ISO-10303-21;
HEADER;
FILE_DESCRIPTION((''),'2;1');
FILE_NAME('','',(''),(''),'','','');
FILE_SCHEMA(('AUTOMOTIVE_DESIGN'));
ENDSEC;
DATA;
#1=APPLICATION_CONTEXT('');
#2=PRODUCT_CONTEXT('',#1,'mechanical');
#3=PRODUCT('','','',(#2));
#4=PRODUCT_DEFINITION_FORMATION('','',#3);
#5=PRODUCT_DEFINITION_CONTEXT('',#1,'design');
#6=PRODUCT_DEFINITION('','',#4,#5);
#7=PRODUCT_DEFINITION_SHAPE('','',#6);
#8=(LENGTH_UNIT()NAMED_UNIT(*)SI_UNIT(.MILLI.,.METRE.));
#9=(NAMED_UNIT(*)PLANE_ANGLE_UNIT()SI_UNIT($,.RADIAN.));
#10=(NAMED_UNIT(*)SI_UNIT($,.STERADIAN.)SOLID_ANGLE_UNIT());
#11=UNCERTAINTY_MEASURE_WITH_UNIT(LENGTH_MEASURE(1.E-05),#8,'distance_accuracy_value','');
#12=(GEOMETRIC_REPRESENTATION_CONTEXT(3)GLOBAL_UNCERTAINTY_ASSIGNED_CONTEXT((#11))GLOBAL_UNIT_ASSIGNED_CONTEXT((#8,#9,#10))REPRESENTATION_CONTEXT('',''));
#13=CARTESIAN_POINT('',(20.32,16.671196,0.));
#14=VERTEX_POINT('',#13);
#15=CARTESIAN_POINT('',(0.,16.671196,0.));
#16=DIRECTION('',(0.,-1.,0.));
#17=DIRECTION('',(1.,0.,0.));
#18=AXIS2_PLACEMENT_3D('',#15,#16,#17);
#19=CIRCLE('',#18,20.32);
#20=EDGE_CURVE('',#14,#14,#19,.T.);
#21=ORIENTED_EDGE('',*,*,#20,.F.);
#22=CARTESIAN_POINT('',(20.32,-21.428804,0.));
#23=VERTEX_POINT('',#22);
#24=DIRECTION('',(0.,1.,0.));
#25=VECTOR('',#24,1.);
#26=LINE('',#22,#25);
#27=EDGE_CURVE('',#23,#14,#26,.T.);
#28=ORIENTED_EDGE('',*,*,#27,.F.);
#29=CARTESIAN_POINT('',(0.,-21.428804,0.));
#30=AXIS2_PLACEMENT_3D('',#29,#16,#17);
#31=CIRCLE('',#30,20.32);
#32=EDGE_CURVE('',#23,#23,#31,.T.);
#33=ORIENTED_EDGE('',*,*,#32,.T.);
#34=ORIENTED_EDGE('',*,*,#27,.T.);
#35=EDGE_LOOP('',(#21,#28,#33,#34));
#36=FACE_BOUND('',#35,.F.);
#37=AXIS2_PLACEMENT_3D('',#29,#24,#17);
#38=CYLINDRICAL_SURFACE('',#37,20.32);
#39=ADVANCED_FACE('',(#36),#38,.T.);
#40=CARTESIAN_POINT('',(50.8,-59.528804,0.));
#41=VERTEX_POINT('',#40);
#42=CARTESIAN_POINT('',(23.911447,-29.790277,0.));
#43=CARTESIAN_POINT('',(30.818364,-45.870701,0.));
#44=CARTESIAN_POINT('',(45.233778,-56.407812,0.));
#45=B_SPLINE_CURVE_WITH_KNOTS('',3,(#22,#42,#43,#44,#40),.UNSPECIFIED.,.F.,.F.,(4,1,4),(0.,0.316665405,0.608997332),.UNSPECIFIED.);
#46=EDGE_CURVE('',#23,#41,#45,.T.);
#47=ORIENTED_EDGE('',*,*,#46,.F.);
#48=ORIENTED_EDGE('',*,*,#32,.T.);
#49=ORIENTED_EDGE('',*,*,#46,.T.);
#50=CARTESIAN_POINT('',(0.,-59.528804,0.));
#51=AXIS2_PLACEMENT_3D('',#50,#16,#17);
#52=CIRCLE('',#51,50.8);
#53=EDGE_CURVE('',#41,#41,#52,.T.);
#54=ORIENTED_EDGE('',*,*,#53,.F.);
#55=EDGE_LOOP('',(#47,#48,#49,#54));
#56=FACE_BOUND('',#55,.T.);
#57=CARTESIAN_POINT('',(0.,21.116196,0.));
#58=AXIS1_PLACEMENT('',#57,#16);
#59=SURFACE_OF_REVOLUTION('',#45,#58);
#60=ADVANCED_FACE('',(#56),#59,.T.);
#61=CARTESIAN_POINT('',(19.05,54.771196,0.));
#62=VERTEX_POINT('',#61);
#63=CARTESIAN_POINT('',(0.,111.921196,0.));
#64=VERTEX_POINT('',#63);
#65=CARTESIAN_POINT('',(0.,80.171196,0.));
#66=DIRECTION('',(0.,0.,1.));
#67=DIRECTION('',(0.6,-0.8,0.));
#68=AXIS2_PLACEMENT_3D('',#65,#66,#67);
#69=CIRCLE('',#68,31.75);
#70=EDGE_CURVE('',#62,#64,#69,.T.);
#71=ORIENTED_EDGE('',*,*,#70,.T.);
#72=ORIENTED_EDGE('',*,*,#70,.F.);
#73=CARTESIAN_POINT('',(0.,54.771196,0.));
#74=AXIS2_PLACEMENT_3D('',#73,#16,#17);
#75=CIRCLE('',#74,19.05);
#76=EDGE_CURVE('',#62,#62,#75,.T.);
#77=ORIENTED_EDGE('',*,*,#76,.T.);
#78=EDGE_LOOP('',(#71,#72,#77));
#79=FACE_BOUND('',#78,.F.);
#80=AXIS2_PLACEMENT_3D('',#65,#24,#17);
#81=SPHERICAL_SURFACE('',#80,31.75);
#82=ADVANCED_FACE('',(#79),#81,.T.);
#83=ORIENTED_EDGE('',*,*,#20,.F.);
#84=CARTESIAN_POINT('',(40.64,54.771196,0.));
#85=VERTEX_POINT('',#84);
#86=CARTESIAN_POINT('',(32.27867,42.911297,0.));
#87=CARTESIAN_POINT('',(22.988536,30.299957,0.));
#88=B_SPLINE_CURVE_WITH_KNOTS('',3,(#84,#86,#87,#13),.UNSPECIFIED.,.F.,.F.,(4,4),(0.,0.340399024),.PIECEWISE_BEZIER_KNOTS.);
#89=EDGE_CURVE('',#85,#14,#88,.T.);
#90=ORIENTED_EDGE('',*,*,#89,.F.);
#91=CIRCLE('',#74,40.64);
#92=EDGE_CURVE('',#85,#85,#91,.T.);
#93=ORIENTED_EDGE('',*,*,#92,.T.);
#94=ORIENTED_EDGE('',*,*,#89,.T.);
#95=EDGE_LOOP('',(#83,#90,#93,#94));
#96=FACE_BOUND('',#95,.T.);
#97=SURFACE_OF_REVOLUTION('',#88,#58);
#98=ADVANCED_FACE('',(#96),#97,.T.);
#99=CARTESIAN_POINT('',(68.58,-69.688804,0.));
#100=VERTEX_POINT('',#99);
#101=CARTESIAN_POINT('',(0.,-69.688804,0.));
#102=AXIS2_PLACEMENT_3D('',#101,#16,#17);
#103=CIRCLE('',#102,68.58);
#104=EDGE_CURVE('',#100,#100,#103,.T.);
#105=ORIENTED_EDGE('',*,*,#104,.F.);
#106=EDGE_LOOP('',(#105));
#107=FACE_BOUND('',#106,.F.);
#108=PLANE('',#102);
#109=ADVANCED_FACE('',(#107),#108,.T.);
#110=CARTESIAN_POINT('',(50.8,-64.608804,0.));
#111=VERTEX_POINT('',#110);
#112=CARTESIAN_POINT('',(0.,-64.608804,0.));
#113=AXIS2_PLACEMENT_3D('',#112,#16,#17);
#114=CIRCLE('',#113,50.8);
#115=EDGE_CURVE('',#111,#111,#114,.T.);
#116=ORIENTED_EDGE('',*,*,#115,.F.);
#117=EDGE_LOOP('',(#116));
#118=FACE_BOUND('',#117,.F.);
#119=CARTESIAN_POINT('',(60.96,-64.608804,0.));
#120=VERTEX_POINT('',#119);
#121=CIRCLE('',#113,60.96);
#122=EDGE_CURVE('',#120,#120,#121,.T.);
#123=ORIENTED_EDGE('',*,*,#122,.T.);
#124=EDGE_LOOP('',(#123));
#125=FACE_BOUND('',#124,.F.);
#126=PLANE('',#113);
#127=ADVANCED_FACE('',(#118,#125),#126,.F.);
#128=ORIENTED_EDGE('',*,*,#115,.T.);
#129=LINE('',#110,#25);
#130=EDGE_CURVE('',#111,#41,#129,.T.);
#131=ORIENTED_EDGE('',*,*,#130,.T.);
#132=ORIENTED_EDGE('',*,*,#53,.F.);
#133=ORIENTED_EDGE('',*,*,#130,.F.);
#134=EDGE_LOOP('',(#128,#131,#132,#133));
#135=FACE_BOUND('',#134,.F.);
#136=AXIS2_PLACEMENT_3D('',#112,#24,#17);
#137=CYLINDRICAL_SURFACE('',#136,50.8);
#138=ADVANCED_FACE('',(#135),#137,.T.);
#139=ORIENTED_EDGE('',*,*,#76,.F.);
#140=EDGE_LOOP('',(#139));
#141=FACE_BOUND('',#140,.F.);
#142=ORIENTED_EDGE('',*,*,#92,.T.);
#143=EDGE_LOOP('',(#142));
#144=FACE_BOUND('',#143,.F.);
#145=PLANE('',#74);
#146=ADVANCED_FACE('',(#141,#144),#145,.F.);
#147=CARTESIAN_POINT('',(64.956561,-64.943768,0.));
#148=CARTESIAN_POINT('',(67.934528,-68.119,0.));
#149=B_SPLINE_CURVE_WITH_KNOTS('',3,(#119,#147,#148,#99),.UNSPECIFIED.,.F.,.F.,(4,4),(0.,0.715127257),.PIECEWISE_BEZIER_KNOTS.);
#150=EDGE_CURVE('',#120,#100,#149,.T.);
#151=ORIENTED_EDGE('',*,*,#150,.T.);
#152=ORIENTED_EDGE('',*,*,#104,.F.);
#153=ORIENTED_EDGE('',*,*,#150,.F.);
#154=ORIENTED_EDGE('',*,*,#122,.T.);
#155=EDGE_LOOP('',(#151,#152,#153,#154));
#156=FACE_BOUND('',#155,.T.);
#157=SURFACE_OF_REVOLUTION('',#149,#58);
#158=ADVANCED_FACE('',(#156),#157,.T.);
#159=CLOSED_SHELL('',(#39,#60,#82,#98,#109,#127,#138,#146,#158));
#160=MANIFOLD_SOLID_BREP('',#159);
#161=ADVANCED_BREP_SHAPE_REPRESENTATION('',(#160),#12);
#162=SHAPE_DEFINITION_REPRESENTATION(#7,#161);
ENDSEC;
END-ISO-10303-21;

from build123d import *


with BuildPart() as f1:
    # F0 (on Top) → F1 (revolve)
    with BuildSketch(Plane.XY):
        with BuildLine():
            Line((40.64, 54.7711955523), (19.05, 54.7711955523))
            ThreePointArc((19.05, 54.7711955523), (30.1206947131, 90.2114271234), (0, 111.9211955523))
            Line((0, 111.9211955523), (0, -69.6888044477))
            Line((0, -69.6888044477), (68.58, -69.6888044477))
            add(Edge.make_bspline(
                [(60.96, -64.6088044477), (63.6417855309, -66.0841173211), (66.1108927654, -67.8864608844), (68.58, -69.6888044477)],
                knots=[0.8150158321, 0.8150158321, 0.8150158321, 0.8150158321, 1, 1, 1, 1], degree=3))
            Line((60.96, -64.6088044477), (50.8, -64.6088044477))
            Line((50.8, -64.6088044477), (50.8, -59.5288044477))
            add(Edge.make_bspline(
                [(20.32, -21.4288044477), (23.9114469199, -29.790276514), (30.8183636705, -45.8707011348), (45.2337782312, -56.4078117468), (50.8, -59.5288044477)],
                knots=[0, 0, 0, 0, 0.3166654052, 0.6089973318, 0.6089973318, 0.6089973318, 0.6089973318], degree=3))
            Line((20.32, -21.4288044477), (20.32, -10.7584101574))
            Line((20.32, -10.7584101574), (20.32, -10.1280333474))
            add(Edge.make_bspline(
                [(20.32, 16.6711955523), (18.2177086424, 5.9343622337), (20.2250450762, -5.4339231678), (20.32, -10.1280333474)],
                knots=[0.3403990237, 0.3403990237, 0.3403990237, 0.3403990237, 0.6085677542, 0.6085677542, 0.6085677542, 0.6085677542], degree=3))
            add(Edge.make_bspline(
                [(40.64, 54.7711955523), (32.2786703904, 42.9112967892), (22.9885360543, 30.2999567207), (20.32, 16.6711955523)],
                knots=[0, 0, 0, 0, 0.3403990237, 0.3403990237, 0.3403990237, 0.3403990237], degree=3))
        make_face()
        with BuildLine():
            Line((20.32, -10.1280333474), (20.32, 16.6711955523))
            add(Edge.make_bspline(
                [(20.32, 16.6711955523), (18.2177086424, 5.9343622337), (20.2250450762, -5.4339231678), (20.32, -10.1280333474)],
                knots=[0.3403990237, 0.3403990237, 0.3403990237, 0.3403990237, 0.6085677542, 0.6085677542, 0.6085677542, 0.6085677542], degree=3))
        make_face()
        with BuildLine():
            add(Edge.make_bspline(
                [(60.96, -64.6088044477), (63.6417855309, -66.0841173211), (66.1108927654, -67.8864608844), (68.58, -69.6888044477)],
                knots=[0.8150158321, 0.8150158321, 0.8150158321, 0.8150158321, 1, 1, 1, 1], degree=3))
            add(Edge.make_bspline(
                [(60.96, -64.6088044477), (64.9565607309, -64.943768084), (67.9345280908, -68.1189996069), (68.58, -69.6888044477)],
                knots=[0, 0, 0, 0, 0.7151272569, 0.7151272569, 0.7151272569, 0.7151272569], degree=3))
        make_face()
    revolve(axis=Axis((0, 21.1161955523, 0), (0, -1, 0)))


solid = f1.part
